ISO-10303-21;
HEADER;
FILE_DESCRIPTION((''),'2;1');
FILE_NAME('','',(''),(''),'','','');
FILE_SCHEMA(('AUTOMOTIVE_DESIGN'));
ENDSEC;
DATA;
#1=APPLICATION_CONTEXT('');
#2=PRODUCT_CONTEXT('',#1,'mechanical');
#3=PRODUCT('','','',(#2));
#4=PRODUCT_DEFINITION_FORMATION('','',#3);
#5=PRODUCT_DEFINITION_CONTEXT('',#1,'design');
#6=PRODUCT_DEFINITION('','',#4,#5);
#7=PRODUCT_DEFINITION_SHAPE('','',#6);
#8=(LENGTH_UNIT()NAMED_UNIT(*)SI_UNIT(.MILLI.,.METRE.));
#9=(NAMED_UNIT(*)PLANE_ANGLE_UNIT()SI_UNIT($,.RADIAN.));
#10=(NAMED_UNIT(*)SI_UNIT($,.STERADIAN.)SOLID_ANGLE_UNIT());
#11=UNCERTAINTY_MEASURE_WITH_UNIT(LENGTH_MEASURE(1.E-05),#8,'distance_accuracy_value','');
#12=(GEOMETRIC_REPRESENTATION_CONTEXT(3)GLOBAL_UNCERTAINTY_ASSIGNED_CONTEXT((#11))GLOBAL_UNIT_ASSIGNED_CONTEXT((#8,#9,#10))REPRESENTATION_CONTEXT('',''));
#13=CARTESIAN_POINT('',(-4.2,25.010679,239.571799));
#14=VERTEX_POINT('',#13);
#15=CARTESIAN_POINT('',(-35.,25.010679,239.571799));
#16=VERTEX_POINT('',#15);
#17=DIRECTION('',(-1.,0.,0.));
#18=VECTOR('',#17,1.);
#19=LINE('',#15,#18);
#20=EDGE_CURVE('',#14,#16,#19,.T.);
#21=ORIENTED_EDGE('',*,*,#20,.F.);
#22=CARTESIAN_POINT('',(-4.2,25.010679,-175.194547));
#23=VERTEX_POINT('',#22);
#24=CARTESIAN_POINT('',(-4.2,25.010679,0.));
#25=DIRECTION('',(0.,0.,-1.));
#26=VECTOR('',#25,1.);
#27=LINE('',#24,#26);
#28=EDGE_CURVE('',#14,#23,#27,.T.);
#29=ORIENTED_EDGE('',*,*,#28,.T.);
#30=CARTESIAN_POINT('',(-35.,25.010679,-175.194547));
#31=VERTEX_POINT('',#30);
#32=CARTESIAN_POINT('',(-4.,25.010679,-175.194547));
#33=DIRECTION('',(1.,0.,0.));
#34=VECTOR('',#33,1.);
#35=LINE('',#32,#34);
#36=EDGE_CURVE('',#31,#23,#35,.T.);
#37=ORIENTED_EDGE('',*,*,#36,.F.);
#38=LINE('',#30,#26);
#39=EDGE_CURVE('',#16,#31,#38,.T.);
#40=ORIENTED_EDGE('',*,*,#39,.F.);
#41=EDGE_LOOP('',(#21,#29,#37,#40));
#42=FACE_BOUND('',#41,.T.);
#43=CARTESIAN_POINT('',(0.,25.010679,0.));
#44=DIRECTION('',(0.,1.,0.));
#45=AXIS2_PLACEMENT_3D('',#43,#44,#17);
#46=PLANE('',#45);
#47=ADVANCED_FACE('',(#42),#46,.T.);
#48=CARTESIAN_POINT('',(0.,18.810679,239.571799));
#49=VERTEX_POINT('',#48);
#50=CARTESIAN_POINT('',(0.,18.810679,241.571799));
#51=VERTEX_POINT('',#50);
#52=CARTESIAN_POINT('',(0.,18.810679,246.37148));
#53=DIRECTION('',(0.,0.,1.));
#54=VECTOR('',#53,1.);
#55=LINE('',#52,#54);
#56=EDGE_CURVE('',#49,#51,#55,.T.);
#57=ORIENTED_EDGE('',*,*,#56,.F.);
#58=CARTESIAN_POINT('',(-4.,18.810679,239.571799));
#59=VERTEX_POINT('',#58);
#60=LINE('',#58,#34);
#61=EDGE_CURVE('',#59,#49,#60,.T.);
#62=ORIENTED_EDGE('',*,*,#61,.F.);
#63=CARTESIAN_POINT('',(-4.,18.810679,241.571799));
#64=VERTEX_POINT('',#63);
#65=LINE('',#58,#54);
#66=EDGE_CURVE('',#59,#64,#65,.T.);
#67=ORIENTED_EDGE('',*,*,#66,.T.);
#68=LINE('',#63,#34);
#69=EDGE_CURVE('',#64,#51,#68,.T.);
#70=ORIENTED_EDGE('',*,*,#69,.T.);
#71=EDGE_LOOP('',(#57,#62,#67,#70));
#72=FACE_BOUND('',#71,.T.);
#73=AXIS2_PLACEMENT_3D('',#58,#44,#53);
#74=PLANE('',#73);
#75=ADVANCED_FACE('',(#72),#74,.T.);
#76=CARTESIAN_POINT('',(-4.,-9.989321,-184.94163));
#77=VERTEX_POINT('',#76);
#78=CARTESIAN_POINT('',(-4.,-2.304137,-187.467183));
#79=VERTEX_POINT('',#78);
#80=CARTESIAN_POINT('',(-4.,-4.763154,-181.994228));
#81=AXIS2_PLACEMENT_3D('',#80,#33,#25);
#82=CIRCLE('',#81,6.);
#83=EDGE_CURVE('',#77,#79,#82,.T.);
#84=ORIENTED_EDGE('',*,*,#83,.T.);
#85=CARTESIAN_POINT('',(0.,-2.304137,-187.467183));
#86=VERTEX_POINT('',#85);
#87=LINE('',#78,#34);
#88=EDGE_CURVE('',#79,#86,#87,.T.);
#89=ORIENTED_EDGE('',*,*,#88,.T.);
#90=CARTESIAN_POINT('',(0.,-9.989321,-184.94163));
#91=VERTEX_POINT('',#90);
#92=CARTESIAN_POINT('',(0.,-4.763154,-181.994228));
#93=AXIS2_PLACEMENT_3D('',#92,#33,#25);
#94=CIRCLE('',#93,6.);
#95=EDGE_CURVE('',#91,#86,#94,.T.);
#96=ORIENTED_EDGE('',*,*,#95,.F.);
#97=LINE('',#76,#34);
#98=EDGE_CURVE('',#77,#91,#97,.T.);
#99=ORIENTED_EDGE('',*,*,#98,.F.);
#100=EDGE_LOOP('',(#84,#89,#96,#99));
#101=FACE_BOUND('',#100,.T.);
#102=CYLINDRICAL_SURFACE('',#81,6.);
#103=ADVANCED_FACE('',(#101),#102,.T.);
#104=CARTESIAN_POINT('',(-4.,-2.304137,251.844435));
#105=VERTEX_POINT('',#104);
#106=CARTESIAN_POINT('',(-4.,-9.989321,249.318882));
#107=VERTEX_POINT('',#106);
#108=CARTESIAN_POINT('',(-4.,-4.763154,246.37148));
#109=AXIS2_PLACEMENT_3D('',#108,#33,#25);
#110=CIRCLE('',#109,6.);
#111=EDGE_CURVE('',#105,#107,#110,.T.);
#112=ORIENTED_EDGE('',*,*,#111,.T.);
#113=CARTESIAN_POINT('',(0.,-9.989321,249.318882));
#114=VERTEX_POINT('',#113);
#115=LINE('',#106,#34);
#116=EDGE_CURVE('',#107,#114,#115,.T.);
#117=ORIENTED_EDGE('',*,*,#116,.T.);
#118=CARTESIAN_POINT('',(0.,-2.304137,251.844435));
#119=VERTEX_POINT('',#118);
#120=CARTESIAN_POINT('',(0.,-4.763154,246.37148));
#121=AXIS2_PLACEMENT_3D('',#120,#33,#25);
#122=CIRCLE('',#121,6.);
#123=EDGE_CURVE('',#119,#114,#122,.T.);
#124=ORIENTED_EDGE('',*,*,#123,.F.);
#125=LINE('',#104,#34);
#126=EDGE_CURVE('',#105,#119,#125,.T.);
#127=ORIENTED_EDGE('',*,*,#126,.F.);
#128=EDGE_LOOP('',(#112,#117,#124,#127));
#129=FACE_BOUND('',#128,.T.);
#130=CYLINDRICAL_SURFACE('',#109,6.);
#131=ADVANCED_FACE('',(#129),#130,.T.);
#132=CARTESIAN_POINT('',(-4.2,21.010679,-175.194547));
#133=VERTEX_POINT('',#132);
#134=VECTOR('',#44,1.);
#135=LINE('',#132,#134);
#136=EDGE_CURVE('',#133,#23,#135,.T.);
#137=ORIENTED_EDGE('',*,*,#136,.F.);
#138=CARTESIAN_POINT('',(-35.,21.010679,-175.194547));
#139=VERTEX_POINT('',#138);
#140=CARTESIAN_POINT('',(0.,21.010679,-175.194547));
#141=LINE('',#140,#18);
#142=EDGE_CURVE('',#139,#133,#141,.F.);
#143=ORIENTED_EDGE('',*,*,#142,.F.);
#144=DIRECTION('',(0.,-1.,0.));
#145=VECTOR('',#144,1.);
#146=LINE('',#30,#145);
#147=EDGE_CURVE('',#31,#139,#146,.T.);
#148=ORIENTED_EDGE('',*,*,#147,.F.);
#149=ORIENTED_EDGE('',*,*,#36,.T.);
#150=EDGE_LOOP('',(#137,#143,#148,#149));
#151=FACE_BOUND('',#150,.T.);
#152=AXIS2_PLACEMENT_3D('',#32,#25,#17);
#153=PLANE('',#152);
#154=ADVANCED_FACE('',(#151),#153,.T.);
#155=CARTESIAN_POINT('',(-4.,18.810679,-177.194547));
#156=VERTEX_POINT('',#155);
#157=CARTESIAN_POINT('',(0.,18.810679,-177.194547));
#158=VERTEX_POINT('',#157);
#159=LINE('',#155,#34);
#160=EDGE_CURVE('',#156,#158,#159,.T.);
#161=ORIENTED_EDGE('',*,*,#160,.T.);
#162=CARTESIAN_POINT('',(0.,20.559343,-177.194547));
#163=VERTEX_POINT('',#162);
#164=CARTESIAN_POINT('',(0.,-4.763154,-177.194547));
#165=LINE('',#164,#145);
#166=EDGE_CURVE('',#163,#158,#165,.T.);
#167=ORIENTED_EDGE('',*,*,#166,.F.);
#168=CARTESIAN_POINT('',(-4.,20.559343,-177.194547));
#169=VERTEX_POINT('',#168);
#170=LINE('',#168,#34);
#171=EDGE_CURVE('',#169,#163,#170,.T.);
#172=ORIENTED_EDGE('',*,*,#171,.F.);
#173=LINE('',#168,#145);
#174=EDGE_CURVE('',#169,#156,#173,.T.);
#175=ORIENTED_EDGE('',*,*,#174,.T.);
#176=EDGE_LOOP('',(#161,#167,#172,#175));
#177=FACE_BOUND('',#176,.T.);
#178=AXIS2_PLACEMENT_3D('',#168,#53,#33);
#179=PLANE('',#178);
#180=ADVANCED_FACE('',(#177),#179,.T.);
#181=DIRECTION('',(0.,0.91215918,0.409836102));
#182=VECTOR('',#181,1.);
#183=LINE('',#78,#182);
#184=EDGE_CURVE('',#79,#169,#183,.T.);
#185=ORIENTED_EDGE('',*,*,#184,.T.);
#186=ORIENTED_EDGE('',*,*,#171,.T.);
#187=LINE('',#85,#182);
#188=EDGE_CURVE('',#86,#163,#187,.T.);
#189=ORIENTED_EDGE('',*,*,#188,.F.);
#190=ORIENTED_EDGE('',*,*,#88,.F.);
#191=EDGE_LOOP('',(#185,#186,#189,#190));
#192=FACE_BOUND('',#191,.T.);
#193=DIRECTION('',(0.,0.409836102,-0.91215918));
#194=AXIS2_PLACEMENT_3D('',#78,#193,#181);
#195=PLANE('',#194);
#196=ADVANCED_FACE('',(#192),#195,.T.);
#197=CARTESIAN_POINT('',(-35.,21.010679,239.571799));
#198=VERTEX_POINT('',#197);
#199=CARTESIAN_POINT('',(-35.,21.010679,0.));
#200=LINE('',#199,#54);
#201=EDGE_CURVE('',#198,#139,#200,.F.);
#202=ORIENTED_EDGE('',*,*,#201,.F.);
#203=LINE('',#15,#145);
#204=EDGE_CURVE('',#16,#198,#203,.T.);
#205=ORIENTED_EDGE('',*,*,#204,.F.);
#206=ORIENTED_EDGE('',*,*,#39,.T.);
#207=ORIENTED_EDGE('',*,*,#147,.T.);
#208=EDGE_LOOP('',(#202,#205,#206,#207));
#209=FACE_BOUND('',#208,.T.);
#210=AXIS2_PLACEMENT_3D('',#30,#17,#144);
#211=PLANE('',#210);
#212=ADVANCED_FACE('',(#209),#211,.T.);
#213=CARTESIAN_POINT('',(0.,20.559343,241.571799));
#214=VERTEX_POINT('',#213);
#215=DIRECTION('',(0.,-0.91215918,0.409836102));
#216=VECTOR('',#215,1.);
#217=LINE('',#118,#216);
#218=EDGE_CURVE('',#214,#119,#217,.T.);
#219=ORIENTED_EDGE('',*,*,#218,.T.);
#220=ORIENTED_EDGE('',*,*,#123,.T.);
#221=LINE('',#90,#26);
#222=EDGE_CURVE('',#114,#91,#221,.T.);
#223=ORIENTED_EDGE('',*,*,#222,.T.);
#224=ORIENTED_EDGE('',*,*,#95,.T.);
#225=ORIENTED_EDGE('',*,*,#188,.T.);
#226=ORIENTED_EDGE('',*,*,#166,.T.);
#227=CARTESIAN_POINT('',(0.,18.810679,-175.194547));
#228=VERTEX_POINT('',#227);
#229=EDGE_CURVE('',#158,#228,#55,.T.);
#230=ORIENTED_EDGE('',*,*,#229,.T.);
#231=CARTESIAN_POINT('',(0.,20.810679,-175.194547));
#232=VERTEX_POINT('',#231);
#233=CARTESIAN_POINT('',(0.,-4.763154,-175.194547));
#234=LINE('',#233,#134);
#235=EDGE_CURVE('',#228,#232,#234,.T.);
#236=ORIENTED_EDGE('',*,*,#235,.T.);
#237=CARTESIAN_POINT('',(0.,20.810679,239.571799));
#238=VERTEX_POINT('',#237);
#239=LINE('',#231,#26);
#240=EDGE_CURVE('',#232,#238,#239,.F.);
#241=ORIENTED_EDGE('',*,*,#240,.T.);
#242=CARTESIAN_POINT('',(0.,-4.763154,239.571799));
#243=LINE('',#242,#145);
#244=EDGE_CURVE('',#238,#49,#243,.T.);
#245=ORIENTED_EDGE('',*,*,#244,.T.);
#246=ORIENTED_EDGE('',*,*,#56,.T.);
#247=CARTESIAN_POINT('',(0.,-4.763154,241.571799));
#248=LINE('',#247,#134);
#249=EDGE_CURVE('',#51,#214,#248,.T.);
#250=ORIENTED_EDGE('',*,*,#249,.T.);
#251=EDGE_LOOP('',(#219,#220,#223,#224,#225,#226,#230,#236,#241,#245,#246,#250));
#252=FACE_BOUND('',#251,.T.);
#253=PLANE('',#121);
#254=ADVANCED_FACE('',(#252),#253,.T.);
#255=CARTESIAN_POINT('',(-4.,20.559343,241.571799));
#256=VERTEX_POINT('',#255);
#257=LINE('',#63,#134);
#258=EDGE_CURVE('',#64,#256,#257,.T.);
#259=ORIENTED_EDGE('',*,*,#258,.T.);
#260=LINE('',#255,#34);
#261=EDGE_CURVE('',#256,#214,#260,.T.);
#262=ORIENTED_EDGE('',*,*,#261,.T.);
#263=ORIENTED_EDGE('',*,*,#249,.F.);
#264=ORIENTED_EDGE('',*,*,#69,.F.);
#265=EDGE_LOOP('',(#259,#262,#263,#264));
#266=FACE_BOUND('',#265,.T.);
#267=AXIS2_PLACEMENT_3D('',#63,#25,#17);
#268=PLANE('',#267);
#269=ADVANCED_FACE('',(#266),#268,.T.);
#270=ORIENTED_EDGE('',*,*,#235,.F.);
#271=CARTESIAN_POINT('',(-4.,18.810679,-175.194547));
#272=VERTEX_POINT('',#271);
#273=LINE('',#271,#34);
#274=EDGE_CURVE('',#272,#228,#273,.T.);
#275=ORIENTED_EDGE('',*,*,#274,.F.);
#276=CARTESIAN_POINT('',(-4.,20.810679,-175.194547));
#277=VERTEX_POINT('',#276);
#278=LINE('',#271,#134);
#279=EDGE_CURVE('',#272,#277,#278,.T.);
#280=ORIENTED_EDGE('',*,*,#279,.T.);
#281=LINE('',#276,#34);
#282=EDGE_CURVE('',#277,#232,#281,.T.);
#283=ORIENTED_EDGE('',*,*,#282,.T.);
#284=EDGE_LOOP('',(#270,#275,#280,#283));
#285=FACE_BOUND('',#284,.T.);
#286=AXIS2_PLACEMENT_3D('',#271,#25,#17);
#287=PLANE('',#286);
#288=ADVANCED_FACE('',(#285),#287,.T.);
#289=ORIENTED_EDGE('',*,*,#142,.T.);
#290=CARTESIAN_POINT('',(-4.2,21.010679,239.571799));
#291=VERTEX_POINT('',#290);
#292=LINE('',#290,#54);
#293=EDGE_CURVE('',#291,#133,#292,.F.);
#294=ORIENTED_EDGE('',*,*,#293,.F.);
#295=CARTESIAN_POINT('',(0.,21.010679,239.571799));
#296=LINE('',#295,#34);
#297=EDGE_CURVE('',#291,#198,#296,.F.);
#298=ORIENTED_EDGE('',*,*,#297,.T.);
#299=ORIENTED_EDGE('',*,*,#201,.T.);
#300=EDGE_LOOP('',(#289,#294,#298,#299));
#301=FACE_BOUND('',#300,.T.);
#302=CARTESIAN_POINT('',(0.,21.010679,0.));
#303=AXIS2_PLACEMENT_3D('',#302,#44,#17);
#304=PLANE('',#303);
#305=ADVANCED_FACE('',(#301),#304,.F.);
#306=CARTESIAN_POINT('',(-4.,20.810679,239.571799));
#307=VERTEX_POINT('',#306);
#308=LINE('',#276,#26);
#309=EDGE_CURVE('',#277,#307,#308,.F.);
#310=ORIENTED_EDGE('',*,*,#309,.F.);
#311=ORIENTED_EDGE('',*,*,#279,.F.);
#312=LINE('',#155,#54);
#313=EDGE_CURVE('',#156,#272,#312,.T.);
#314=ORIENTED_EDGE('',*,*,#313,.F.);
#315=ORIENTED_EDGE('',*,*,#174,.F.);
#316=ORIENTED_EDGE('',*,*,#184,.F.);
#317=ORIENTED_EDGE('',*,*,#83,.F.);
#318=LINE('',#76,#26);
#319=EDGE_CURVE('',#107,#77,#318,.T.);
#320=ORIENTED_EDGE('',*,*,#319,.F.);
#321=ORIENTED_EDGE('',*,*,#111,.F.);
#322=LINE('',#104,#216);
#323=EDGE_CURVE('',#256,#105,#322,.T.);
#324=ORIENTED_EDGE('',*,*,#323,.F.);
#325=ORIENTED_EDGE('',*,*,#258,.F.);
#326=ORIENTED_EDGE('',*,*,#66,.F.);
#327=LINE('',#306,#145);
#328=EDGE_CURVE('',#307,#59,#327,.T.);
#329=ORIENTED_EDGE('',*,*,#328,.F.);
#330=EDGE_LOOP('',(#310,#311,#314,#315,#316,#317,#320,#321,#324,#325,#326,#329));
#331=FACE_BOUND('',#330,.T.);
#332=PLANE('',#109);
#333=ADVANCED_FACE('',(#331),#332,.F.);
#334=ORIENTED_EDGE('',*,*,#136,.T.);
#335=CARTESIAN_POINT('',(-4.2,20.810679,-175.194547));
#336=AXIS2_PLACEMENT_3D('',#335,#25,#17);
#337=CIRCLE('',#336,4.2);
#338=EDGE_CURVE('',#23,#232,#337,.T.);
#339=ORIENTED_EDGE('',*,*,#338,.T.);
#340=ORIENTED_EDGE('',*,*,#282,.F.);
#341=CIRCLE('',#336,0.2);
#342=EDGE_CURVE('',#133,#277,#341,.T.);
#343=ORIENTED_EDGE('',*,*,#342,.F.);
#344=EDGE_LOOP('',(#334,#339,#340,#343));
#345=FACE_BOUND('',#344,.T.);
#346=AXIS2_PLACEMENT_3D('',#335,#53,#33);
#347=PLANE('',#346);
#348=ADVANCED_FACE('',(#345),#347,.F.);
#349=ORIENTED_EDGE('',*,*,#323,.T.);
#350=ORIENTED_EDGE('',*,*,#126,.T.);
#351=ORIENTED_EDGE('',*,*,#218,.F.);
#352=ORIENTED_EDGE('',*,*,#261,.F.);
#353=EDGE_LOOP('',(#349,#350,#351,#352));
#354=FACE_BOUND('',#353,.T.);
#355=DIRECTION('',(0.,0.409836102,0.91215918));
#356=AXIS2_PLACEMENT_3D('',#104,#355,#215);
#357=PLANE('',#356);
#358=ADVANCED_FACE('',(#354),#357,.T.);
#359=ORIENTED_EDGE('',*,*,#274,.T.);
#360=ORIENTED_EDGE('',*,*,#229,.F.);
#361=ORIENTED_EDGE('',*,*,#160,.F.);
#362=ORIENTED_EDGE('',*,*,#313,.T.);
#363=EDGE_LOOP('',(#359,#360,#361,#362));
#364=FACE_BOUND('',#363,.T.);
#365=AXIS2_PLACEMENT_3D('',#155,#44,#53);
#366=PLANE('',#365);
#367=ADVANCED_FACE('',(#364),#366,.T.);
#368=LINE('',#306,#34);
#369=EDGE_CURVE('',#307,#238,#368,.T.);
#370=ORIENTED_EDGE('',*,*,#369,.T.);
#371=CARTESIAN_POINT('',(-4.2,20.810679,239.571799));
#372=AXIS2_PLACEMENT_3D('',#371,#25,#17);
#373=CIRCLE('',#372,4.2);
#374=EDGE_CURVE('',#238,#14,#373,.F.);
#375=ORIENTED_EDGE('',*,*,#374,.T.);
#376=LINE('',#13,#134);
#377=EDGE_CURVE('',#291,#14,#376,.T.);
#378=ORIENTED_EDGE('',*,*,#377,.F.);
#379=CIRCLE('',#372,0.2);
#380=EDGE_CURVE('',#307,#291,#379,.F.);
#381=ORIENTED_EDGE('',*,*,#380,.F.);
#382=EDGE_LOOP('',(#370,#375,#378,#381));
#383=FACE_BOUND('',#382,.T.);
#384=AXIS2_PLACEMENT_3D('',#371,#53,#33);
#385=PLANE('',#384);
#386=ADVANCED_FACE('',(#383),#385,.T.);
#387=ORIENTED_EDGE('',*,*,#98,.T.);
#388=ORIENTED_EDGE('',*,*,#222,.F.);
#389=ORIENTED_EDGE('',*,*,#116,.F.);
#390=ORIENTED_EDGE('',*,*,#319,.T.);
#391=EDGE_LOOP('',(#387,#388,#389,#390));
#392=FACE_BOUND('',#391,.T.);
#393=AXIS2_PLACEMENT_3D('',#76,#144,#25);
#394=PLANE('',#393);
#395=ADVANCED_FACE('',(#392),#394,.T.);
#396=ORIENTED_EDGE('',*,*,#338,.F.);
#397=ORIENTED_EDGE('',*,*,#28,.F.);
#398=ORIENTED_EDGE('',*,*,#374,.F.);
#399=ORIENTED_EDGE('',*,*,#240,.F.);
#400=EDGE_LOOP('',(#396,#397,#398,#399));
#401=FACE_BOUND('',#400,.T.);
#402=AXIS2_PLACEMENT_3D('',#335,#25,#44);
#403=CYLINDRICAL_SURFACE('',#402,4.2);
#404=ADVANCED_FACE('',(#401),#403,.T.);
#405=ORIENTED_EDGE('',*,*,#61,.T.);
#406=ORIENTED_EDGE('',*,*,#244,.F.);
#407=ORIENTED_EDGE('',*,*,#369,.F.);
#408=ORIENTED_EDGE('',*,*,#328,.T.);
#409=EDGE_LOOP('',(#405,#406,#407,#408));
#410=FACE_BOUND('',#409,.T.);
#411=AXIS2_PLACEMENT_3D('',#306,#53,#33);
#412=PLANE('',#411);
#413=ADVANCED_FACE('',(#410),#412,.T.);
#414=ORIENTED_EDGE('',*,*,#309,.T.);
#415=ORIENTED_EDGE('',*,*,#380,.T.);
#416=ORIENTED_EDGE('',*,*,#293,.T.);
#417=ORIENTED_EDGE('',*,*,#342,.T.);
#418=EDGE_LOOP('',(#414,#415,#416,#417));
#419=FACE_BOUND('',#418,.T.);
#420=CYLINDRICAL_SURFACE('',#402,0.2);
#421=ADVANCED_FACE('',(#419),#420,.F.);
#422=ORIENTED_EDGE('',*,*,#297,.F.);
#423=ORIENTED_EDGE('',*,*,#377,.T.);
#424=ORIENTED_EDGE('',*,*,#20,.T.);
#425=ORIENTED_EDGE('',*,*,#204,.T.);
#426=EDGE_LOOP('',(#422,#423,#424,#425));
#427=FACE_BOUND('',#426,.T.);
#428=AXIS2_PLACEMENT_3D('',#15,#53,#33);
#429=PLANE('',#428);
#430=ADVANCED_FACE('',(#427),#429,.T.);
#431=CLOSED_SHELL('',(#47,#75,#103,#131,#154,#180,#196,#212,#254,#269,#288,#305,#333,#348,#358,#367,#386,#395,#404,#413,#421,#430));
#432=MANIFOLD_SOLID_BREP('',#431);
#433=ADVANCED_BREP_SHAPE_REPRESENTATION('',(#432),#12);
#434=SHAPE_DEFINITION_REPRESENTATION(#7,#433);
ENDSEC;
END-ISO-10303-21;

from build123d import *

# Parameters (mm, degrees)
BASE_FLANGE1_DEPTH            = 4
EDGE_FLANGE1_STRIP_W          = 16.4
EDGE_FLANGE1_STRIP_H          = 4
EDGE_FLANGE1_STRIP_CUT_DEPTH  = 414.766345977
EDGE_FLANGE1_RELIEF_W         = 18.4
EDGE_FLANGE1_RELIEF_H         = 2
EDGE_FLANGE1_RELIEF_CUT_DEPTH = 4
EDGE_FLANGE1_DEPTH            = 414.766345977


# Sheet-metal steps are written as plain solids
with BuildPart() as part:
    # Sketch1 → Base-Flange1 (new body)
    with BuildSketch(Plane(origin=(0, 0, 0), x_dir=(0, 0, -1), z_dir=(1, 0, 0))):
        with BuildLine():
            Line((175.194547185, 25.010679354), (-239.571798792, 25.010679354))
            Line((-239.571798792, 25.010679354), (-251.844435082, -2.304137004))
            ThreePointArc((-251.844435082, -2.304137004), (-252.071577805, -6.636355429), (-249.318881936, -9.989320646))
            Line((-249.318881936, -9.989320646), (184.941630328, -9.989320646))
            ThreePointArc((184.941630328, -9.989320646), (187.694326197, -6.636355429), (187.467183475, -2.304137004))
            Line((187.467183475, -2.304137004), (175.194547185, 25.010679354))
        make_face()
    extrude(amount=-BASE_FLANGE1_DEPTH)

    # Edge-Flange1 strip (across the edge) → Edge-Flange1 strip cut (cut)
    with BuildSketch(Plane(origin=(-4, 25.010679354, 239.571798792), x_dir=(0, -1, 0), z_dir=(0, 0, -1))):
        with Locations((-4, -2)):
            Rectangle(EDGE_FLANGE1_STRIP_W, EDGE_FLANGE1_STRIP_H)
    extrude(amount=EDGE_FLANGE1_STRIP_CUT_DEPTH, mode=Mode.SUBTRACT)

    # Edge-Flange1 relief (on the sheet) → Edge-Flange1 relief cut (cut)
    with BuildSketch(Plane(origin=(-4, 20.810679354, 239.571798792), x_dir=(0, -1, 0), z_dir=(-1, 0, 0))):
        with Locations((-7.2, 1)):
            Rectangle(EDGE_FLANGE1_RELIEF_W, EDGE_FLANGE1_RELIEF_H)
        with Locations((-7.2, -415.766345977)):
            Rectangle(EDGE_FLANGE1_RELIEF_W, EDGE_FLANGE1_RELIEF_H)
    extrude(amount=-EDGE_FLANGE1_RELIEF_CUT_DEPTH, mode=Mode.SUBTRACT)

    # Edge-Flange1 section (across the edge) → Edge-Flange1 (add)
    with BuildSketch(Plane(origin=(-4, 25.010679354, 239.571798792), x_dir=(0, -1, 0), z_dir=(0, 0, -1))):
        with BuildLine():
            Line((0, 0.2), (0, 31))
            Line((0, 31), (4, 31))
            Line((4, 31), (4, 0.2))
            ThreePointArc((4, 0.2), (4.058578644, 0.058578644), (4.2, 0))
            Line((4.2, 0), (4.2, -4))
            ThreePointArc((4.2, -4), (1.230151519, -2.769848481), (0, 0.2))
        make_face()
    extrude(amount=EDGE_FLANGE1_DEPTH)


solid = part.part
